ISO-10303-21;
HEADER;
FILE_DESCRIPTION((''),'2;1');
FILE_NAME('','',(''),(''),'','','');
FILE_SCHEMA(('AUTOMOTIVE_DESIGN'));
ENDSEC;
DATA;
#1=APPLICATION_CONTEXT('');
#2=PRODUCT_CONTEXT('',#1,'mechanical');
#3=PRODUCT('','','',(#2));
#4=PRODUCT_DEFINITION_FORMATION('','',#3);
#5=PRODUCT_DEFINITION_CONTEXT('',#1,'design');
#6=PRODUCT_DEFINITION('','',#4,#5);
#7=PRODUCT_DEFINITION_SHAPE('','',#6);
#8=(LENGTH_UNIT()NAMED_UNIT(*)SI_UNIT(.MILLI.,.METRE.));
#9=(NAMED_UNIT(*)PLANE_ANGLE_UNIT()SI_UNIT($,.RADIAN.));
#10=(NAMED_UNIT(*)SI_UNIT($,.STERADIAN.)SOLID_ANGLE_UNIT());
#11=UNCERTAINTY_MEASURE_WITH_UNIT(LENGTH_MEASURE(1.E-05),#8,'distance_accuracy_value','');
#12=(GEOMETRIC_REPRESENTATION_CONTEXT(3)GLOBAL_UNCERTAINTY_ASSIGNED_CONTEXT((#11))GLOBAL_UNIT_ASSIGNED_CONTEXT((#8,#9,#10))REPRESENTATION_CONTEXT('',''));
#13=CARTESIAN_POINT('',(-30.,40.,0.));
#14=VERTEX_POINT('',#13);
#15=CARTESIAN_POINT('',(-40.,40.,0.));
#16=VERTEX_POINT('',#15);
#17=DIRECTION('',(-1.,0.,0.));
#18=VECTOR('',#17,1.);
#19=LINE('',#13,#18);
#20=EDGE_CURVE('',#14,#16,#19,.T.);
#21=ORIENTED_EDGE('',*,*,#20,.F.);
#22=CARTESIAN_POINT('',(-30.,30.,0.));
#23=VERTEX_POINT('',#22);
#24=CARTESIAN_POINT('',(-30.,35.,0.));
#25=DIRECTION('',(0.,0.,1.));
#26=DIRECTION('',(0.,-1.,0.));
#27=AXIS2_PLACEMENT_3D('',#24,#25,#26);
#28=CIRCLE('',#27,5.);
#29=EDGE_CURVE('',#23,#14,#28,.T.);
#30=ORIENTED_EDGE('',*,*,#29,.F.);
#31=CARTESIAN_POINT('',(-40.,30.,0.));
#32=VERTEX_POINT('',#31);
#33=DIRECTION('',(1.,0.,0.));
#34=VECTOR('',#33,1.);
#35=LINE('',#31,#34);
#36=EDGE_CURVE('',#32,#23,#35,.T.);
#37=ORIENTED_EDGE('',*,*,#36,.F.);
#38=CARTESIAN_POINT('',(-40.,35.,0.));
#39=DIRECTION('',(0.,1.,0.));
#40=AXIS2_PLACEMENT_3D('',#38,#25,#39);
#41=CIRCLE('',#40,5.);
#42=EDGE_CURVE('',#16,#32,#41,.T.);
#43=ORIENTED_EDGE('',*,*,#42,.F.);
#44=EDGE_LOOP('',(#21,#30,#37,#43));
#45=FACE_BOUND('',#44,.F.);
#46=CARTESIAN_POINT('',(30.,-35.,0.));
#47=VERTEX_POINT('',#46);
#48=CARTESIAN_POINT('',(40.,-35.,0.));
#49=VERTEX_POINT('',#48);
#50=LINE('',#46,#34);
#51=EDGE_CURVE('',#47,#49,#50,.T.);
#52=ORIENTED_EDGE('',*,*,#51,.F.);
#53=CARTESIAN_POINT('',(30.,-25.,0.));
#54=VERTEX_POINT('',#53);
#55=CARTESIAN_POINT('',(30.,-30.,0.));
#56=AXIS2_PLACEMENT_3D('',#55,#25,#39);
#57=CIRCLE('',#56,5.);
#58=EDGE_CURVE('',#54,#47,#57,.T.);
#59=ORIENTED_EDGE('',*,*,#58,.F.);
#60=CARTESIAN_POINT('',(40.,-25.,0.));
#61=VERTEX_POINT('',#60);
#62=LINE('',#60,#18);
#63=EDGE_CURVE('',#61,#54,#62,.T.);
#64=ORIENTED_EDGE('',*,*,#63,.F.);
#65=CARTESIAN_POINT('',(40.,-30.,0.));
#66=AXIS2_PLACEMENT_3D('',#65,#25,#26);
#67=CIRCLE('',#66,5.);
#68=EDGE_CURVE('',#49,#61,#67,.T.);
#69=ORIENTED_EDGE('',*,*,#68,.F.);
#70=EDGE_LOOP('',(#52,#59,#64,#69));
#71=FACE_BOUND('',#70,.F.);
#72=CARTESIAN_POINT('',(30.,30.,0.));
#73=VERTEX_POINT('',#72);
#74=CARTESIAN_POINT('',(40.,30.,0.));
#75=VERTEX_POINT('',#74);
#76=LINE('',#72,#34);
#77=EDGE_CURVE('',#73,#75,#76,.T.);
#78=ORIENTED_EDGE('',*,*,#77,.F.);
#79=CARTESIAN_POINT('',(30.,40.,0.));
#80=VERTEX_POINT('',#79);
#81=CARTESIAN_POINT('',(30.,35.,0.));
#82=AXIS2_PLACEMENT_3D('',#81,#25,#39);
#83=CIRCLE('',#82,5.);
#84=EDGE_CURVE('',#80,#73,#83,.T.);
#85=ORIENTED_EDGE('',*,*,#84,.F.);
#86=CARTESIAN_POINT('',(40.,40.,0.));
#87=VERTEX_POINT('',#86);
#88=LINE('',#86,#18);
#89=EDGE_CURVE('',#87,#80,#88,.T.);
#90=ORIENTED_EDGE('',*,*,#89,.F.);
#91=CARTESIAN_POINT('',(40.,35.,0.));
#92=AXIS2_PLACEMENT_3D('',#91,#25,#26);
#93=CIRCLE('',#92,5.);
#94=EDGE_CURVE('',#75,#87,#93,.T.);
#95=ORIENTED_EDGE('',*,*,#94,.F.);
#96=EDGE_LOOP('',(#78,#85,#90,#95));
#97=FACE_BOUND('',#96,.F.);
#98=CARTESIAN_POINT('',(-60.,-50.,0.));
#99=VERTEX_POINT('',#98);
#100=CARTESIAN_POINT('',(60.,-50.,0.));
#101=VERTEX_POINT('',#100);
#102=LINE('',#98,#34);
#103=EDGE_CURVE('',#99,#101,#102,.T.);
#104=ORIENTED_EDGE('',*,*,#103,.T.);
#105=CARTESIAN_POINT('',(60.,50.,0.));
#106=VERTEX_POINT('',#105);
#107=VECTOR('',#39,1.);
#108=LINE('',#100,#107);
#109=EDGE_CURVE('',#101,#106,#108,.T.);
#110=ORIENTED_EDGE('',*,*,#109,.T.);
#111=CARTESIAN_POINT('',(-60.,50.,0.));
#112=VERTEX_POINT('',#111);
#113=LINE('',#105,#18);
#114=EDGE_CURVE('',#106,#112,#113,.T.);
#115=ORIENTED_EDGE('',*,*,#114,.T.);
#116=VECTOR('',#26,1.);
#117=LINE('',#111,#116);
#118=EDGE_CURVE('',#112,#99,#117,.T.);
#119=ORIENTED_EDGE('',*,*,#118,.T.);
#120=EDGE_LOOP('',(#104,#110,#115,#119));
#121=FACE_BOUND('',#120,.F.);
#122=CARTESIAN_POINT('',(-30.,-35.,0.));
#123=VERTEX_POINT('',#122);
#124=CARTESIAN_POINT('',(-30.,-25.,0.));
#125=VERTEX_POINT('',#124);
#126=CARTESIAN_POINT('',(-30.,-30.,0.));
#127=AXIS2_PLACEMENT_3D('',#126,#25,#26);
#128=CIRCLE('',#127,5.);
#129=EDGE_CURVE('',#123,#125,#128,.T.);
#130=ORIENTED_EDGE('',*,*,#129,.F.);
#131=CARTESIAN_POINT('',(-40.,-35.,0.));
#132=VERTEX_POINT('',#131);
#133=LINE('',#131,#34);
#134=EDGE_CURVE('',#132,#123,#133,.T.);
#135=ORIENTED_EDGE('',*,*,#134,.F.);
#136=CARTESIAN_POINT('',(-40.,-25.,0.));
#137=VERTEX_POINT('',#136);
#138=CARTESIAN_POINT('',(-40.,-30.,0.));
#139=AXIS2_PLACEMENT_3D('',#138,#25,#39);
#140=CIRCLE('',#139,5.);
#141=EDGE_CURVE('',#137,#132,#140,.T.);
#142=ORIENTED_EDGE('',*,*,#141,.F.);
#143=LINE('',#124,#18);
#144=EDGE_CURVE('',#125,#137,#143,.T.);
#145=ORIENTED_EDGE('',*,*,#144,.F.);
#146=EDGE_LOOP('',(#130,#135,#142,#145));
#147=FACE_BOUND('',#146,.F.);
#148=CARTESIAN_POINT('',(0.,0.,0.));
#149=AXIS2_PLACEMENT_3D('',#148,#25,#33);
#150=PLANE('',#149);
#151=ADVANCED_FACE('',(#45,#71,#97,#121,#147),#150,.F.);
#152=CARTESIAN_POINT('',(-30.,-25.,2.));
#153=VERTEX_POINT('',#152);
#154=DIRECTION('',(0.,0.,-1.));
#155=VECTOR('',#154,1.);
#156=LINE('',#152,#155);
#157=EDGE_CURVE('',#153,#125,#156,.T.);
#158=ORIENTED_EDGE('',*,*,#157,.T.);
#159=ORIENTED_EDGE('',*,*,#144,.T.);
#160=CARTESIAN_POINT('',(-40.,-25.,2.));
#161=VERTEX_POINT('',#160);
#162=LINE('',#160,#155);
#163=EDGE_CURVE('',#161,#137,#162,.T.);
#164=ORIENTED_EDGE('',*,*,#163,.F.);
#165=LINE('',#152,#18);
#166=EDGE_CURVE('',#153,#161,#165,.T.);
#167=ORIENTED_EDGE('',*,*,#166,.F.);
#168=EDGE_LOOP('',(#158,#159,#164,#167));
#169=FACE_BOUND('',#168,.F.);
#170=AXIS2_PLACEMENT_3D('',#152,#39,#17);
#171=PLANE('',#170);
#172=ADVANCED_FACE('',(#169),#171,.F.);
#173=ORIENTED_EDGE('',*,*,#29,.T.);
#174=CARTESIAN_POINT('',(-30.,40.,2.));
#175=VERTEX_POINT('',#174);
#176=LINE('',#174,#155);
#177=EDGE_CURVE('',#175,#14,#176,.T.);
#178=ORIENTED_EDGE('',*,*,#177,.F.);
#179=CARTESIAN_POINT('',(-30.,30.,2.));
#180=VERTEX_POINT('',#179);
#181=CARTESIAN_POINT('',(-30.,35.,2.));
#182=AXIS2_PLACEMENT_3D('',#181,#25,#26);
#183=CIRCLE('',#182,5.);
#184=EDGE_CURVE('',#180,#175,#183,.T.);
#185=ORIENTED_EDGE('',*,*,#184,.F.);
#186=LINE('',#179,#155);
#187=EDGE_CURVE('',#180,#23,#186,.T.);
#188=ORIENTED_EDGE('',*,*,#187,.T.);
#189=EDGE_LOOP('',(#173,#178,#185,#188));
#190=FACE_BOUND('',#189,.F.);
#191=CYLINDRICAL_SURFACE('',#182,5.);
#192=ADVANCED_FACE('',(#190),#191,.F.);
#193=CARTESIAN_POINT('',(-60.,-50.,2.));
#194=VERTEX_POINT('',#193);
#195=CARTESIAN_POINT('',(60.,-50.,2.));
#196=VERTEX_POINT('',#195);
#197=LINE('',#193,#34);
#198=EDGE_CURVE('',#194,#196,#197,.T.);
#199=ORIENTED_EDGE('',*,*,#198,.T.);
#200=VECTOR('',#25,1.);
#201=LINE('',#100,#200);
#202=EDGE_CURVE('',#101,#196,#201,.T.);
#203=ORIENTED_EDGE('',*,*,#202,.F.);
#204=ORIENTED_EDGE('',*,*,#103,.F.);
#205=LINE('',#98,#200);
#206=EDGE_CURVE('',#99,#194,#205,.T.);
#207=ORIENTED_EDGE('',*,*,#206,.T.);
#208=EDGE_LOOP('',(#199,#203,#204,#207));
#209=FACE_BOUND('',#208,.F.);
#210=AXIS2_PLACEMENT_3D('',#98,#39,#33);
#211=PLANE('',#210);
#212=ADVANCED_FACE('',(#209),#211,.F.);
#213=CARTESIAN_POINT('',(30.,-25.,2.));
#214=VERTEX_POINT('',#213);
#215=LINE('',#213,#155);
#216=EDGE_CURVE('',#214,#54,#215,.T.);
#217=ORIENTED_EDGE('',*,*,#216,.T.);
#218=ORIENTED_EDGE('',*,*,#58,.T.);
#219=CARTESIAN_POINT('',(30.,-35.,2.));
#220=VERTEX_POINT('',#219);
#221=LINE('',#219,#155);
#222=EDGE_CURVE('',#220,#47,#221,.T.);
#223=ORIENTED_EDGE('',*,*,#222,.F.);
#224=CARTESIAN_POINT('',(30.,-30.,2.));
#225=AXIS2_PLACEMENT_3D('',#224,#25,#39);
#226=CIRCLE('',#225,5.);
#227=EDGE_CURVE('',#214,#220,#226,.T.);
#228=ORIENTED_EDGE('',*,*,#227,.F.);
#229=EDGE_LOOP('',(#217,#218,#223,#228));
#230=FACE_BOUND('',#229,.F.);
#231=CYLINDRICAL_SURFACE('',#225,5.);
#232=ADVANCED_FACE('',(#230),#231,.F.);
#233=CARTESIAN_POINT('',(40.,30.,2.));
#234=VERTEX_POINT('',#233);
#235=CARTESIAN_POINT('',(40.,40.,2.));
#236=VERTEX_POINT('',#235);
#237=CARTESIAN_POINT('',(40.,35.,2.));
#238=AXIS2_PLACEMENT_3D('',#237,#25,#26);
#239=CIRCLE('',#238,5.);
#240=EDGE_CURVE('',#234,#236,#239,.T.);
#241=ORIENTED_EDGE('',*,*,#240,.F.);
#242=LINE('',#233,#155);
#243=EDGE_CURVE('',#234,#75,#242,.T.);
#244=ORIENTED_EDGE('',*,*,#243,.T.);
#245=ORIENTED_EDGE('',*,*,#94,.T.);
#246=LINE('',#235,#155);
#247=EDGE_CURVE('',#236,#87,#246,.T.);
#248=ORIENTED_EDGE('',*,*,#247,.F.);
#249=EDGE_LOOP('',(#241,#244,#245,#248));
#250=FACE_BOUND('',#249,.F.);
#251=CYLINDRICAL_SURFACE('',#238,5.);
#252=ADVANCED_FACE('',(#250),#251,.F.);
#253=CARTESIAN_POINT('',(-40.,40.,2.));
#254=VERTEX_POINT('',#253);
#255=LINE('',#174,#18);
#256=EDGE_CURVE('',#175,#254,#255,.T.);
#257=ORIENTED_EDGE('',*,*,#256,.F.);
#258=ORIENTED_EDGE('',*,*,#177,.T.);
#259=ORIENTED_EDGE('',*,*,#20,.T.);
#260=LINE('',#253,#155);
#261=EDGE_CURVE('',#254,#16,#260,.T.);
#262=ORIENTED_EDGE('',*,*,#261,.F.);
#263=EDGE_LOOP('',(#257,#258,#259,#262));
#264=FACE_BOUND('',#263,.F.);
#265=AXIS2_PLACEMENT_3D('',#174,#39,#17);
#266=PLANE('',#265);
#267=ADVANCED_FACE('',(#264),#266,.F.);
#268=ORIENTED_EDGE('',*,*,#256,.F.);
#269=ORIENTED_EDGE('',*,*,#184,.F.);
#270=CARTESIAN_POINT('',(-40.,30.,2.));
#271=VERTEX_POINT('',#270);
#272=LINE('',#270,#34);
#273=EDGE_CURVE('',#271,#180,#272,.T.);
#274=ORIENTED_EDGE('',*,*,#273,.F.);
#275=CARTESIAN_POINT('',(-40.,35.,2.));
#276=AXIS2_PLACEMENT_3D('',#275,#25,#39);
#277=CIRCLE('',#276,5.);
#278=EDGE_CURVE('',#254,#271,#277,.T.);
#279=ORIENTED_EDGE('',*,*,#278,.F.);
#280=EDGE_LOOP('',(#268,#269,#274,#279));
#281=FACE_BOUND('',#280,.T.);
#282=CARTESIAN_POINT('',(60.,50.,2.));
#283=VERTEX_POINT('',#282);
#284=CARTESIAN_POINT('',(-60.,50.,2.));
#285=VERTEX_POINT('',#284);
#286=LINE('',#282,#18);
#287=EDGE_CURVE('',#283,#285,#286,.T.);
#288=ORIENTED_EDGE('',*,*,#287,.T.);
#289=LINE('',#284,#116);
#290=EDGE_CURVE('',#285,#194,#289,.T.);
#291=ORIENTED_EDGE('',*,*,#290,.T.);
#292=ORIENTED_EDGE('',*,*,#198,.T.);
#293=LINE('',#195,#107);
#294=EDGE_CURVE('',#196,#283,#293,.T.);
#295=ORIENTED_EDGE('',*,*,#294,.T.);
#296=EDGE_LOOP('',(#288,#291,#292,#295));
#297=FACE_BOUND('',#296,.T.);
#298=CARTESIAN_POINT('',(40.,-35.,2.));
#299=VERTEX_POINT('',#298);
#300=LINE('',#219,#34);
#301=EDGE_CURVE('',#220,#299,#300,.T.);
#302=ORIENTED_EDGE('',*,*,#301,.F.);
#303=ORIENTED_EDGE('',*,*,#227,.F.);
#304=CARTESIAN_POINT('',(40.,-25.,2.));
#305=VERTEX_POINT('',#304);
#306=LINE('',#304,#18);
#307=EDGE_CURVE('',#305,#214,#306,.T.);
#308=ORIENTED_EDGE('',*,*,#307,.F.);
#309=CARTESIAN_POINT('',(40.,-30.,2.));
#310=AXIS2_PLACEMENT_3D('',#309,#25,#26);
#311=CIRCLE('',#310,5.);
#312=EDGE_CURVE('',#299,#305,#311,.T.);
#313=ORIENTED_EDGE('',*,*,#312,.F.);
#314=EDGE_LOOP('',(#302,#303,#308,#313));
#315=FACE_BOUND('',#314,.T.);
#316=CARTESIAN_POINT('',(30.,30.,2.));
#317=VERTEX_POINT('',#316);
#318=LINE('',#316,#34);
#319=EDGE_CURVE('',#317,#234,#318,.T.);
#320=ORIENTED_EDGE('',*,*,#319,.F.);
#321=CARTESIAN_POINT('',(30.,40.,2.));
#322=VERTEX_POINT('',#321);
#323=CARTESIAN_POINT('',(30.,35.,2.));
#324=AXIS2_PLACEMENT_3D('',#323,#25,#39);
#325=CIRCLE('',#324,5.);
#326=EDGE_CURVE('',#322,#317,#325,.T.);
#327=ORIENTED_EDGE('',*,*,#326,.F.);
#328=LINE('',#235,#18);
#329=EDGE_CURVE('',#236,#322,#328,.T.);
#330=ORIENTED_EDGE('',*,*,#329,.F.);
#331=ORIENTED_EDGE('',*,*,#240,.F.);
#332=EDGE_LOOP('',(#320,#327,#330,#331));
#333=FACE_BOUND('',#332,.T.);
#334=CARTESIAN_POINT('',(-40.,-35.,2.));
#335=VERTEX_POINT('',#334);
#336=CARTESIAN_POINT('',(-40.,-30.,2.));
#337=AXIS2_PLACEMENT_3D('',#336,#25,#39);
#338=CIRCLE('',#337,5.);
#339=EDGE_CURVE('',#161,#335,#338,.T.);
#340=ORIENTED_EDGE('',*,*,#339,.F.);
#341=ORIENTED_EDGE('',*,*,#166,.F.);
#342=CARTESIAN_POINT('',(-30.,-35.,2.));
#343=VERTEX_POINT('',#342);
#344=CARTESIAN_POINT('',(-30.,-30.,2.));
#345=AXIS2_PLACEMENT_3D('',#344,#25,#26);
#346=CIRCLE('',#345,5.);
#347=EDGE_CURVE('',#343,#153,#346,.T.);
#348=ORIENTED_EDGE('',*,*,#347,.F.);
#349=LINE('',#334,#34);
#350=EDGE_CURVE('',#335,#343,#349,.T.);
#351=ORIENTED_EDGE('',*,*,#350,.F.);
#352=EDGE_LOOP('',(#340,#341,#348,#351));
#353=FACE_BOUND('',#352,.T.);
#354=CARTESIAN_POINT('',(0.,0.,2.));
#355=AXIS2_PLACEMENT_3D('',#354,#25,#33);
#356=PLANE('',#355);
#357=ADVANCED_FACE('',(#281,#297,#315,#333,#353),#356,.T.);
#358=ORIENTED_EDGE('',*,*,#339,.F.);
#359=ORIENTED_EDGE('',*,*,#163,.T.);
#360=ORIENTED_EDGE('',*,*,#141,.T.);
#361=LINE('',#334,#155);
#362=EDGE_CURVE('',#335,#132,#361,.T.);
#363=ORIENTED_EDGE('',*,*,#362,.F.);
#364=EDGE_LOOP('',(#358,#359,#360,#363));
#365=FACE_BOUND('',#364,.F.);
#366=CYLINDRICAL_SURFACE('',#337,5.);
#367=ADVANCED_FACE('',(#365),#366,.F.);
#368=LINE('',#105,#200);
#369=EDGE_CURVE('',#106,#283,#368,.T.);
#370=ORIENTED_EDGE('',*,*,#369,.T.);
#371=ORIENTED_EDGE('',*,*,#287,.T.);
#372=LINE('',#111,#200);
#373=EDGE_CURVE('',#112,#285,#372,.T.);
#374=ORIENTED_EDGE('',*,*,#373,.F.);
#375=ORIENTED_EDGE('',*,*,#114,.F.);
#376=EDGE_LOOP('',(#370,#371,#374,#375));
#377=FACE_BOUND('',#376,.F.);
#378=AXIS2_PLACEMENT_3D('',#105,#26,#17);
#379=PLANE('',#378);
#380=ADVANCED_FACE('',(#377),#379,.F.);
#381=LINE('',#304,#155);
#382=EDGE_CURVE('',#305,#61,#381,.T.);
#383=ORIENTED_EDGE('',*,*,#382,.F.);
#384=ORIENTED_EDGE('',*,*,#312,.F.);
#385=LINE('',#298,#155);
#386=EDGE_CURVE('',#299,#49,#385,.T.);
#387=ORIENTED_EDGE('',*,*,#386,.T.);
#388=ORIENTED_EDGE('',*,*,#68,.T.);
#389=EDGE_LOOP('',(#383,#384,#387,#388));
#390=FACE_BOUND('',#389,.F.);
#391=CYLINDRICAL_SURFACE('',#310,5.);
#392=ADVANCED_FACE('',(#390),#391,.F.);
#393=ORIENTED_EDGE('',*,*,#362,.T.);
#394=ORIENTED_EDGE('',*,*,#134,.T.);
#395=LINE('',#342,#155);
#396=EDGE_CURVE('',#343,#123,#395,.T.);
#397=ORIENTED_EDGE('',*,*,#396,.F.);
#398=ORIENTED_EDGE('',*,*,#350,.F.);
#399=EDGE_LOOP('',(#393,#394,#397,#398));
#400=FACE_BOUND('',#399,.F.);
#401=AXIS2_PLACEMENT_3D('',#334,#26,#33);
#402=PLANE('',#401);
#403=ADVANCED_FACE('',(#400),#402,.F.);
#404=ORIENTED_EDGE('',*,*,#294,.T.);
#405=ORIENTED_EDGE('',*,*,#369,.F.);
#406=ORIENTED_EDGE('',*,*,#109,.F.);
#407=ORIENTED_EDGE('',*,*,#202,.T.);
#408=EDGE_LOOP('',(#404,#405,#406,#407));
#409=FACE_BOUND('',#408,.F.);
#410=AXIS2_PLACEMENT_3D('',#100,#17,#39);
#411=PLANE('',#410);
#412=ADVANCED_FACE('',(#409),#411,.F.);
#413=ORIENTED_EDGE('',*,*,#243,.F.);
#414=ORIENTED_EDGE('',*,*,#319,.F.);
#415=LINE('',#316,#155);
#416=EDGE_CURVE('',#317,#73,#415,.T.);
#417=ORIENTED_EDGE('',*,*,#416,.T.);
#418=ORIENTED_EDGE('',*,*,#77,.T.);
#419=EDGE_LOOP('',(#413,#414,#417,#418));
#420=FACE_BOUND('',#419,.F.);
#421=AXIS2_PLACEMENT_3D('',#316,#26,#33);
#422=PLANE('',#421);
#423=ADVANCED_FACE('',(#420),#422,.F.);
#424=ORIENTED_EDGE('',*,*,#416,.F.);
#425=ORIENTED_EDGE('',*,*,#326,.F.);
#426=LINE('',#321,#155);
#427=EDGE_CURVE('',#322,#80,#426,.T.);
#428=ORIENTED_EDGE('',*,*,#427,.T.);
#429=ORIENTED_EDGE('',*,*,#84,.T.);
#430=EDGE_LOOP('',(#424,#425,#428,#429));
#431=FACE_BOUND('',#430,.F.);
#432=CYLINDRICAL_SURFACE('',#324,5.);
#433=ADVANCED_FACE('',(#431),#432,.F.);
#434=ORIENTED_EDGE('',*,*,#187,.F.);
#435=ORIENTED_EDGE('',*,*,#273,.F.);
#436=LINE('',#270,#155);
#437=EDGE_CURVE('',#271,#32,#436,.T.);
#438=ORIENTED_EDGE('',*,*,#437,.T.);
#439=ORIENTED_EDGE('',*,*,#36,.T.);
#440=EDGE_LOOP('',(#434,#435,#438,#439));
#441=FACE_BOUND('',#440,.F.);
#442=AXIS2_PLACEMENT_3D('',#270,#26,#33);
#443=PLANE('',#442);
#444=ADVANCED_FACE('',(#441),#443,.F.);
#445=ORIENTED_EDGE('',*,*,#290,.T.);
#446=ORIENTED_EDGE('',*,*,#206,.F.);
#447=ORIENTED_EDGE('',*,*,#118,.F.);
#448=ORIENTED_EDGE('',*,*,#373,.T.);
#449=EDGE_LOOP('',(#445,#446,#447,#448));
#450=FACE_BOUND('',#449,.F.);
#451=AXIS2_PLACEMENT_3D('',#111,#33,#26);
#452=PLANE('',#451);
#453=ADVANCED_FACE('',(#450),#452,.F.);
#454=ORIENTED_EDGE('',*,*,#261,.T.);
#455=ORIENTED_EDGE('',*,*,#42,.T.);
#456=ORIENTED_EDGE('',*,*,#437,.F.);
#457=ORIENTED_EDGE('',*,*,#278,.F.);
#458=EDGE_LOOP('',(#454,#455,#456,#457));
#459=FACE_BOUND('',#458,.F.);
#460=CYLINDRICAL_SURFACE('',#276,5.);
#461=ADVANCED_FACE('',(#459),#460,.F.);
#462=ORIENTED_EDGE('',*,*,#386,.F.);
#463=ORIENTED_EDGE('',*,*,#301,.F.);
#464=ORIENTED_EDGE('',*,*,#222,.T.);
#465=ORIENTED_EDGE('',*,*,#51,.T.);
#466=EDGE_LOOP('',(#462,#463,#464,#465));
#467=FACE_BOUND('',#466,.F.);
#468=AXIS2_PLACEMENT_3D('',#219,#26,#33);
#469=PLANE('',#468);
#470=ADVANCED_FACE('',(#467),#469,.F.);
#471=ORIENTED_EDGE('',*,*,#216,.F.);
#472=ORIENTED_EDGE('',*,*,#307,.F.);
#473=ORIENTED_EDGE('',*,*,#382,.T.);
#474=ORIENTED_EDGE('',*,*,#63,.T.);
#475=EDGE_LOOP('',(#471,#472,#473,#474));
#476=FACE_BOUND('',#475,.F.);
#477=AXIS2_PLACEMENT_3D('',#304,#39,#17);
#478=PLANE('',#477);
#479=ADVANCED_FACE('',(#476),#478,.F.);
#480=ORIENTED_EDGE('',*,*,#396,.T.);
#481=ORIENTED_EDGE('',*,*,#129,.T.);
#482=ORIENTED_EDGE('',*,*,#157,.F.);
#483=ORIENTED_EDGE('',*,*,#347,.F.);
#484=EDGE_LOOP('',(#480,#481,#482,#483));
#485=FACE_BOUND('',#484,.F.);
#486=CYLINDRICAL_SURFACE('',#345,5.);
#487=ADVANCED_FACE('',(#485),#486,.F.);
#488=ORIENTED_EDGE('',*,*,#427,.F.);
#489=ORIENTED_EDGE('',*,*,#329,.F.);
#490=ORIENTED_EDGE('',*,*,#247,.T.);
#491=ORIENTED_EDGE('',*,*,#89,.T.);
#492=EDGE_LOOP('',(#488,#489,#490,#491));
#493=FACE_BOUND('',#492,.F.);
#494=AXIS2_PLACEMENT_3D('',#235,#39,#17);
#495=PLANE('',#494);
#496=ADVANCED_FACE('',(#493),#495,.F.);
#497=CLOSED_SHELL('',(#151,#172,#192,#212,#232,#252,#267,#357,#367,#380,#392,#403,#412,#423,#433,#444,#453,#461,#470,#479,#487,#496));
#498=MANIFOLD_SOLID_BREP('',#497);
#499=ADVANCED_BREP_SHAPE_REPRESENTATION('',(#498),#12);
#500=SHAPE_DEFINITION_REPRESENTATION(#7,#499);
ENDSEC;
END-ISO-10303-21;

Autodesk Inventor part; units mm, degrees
ref_plane "YZ Plane" through (0, 0, 0) normal (1, 0, 0) x (0, 1, 0)
ref_plane "XZ Plane" through (0, 0, 0) normal (0, 1, 0) x (-1, 0, 0)
ref_plane "XY Plane" through (0, 0, 0) normal (0, 0, 1) x (1, 0, 0)
sketch "Sketch1" plane through (0, 0, 0) normal (0, 0, 1) x (1, 0, 0)
  line L0 (-60, -50) -> (60, -50)
  line L1 (60, -50) -> (60, 50)
  line L2 (60, 50) -> (-60, 50)
  line L3 (-60, 50) -> (-60, -50)
  line L4 (-60, -50) -> (60, 50) construction
  line L5 (60, -50) -> (-60, 50) construction
  line L6 (-60, 0) -> (60, 0) construction
  line L7 (23.5369, 32.6987) -> (33.5369, 32.6987) construction
  line L8 (23.5369, 27.6987) -> (33.5369, 27.6987)
  line L9 (33.5369, 37.6987) -> (23.5369, 37.6987)
  arc A0 (23.5369, 37.6987) -> (23.5369, 27.6987) centre (23.5369, 32.6987) ccw
  arc A1 (33.5369, 27.6987) -> (33.5369, 37.6987) centre (33.5369, 32.6987) ccw
  point P0 (0, 0)
  point P1 (0, 0)
  point P2 (60, 26.1659)
  point P3 (-14.7466, -50)
  point P4 (28.5369, 32.6987)
  dimension "d0" = 120
  dimension "d1" = 100
  dimension "d17" = 5
  dimension "d18" = 10
extrude "Plate1" add sketch "Sketch1" along normal blind 2 contours L3 L2 L1 L0 | A0 L9 A1 L8
sketch "Sketch2" plane through (0, 0, 0) normal (0, 0, -1) x (-1, 0, 0)
  line L0 (-40, 30) -> (160, 30) construction
  line L1 (160, 30) -> (160, 10) construction
  line L2 (160, 10) -> (-40, 10) construction
  line L3 (-40, 10) -> (-40, 30) construction
  line L4 (-60, 50) -> (60, 50) projected
  line L5 (-60, -50) -> (-60, 50) projected
  point P0 (0, 0)
  point P1 (-48, 100)
  point P2 (-50, 98)
  point P3 (40, 70)
  point P4 (-60, 26.6315)
  dimension "d6" = 200
  dimension "d9" = 20
  dimension "d10" = 20
  dimension "d11" = 20
mark "Mark1"
sketch "Sketch3" plane through (0, 0, 2) normal (0, 0, 1) x (1, 0, 0)
  line L0 (60, -50) -> (-60, -50) projected
  line L1 (60, 50) -> (60, -50) projected
  line L2 (-60, 50) -> (60, 50) projected
  line L3 (-60, -50) -> (-60, 50) projected
  line L4 (30, 35) -> (40, 35) construction
  line L5 (30, 30) -> (40, 30)
  line L6 (40, 40) -> (30, 40)
  arc A0 (30, 40) -> (30, 30) centre (30, 35) ccw
  arc A1 (40, 30) -> (40, 40) centre (40, 35) ccw
  point P0 (0, 0)
  point P1 (35, 35)
  dimension "d19" = 5
  dimension "d20" = 10
  dimension "d21" = 15
  dimension "d22" = 25
extrude "Cut1" cut sketch "Sketch3" against normal blind 2 contours A0 L6 A1 L5
pattern_linear "Rectangular Pattern1" count 2 spacing 65 along (0, -1, 0) count 2 spacing 70 along (-1, 0, 0) of "Cut1"
equation "\"d23\" = Thickness"
equation "\"d2\" = Thickness"
equation "\"BendReliefWidth\" = Thickness"
equation "\"BendReliefDepth\" = 0.5 * Thickness"
equation "\"CornerReliefSize\" = 4 * Thickness"
equation "\"MinimumRemnant\" = 2 * Thickness"
equation "\"TransitionRadius\" = BendRadius"
equation "\"JacobiRadiusSize\" = BendRadius"
equation "\"GapSize\" = Thickness"
equation "\"Thickness\" = 2"
equation "\"BendRadius\" = 2.75"
properties part number "TRM 035 motor pillar 2" material "AISI 304"
